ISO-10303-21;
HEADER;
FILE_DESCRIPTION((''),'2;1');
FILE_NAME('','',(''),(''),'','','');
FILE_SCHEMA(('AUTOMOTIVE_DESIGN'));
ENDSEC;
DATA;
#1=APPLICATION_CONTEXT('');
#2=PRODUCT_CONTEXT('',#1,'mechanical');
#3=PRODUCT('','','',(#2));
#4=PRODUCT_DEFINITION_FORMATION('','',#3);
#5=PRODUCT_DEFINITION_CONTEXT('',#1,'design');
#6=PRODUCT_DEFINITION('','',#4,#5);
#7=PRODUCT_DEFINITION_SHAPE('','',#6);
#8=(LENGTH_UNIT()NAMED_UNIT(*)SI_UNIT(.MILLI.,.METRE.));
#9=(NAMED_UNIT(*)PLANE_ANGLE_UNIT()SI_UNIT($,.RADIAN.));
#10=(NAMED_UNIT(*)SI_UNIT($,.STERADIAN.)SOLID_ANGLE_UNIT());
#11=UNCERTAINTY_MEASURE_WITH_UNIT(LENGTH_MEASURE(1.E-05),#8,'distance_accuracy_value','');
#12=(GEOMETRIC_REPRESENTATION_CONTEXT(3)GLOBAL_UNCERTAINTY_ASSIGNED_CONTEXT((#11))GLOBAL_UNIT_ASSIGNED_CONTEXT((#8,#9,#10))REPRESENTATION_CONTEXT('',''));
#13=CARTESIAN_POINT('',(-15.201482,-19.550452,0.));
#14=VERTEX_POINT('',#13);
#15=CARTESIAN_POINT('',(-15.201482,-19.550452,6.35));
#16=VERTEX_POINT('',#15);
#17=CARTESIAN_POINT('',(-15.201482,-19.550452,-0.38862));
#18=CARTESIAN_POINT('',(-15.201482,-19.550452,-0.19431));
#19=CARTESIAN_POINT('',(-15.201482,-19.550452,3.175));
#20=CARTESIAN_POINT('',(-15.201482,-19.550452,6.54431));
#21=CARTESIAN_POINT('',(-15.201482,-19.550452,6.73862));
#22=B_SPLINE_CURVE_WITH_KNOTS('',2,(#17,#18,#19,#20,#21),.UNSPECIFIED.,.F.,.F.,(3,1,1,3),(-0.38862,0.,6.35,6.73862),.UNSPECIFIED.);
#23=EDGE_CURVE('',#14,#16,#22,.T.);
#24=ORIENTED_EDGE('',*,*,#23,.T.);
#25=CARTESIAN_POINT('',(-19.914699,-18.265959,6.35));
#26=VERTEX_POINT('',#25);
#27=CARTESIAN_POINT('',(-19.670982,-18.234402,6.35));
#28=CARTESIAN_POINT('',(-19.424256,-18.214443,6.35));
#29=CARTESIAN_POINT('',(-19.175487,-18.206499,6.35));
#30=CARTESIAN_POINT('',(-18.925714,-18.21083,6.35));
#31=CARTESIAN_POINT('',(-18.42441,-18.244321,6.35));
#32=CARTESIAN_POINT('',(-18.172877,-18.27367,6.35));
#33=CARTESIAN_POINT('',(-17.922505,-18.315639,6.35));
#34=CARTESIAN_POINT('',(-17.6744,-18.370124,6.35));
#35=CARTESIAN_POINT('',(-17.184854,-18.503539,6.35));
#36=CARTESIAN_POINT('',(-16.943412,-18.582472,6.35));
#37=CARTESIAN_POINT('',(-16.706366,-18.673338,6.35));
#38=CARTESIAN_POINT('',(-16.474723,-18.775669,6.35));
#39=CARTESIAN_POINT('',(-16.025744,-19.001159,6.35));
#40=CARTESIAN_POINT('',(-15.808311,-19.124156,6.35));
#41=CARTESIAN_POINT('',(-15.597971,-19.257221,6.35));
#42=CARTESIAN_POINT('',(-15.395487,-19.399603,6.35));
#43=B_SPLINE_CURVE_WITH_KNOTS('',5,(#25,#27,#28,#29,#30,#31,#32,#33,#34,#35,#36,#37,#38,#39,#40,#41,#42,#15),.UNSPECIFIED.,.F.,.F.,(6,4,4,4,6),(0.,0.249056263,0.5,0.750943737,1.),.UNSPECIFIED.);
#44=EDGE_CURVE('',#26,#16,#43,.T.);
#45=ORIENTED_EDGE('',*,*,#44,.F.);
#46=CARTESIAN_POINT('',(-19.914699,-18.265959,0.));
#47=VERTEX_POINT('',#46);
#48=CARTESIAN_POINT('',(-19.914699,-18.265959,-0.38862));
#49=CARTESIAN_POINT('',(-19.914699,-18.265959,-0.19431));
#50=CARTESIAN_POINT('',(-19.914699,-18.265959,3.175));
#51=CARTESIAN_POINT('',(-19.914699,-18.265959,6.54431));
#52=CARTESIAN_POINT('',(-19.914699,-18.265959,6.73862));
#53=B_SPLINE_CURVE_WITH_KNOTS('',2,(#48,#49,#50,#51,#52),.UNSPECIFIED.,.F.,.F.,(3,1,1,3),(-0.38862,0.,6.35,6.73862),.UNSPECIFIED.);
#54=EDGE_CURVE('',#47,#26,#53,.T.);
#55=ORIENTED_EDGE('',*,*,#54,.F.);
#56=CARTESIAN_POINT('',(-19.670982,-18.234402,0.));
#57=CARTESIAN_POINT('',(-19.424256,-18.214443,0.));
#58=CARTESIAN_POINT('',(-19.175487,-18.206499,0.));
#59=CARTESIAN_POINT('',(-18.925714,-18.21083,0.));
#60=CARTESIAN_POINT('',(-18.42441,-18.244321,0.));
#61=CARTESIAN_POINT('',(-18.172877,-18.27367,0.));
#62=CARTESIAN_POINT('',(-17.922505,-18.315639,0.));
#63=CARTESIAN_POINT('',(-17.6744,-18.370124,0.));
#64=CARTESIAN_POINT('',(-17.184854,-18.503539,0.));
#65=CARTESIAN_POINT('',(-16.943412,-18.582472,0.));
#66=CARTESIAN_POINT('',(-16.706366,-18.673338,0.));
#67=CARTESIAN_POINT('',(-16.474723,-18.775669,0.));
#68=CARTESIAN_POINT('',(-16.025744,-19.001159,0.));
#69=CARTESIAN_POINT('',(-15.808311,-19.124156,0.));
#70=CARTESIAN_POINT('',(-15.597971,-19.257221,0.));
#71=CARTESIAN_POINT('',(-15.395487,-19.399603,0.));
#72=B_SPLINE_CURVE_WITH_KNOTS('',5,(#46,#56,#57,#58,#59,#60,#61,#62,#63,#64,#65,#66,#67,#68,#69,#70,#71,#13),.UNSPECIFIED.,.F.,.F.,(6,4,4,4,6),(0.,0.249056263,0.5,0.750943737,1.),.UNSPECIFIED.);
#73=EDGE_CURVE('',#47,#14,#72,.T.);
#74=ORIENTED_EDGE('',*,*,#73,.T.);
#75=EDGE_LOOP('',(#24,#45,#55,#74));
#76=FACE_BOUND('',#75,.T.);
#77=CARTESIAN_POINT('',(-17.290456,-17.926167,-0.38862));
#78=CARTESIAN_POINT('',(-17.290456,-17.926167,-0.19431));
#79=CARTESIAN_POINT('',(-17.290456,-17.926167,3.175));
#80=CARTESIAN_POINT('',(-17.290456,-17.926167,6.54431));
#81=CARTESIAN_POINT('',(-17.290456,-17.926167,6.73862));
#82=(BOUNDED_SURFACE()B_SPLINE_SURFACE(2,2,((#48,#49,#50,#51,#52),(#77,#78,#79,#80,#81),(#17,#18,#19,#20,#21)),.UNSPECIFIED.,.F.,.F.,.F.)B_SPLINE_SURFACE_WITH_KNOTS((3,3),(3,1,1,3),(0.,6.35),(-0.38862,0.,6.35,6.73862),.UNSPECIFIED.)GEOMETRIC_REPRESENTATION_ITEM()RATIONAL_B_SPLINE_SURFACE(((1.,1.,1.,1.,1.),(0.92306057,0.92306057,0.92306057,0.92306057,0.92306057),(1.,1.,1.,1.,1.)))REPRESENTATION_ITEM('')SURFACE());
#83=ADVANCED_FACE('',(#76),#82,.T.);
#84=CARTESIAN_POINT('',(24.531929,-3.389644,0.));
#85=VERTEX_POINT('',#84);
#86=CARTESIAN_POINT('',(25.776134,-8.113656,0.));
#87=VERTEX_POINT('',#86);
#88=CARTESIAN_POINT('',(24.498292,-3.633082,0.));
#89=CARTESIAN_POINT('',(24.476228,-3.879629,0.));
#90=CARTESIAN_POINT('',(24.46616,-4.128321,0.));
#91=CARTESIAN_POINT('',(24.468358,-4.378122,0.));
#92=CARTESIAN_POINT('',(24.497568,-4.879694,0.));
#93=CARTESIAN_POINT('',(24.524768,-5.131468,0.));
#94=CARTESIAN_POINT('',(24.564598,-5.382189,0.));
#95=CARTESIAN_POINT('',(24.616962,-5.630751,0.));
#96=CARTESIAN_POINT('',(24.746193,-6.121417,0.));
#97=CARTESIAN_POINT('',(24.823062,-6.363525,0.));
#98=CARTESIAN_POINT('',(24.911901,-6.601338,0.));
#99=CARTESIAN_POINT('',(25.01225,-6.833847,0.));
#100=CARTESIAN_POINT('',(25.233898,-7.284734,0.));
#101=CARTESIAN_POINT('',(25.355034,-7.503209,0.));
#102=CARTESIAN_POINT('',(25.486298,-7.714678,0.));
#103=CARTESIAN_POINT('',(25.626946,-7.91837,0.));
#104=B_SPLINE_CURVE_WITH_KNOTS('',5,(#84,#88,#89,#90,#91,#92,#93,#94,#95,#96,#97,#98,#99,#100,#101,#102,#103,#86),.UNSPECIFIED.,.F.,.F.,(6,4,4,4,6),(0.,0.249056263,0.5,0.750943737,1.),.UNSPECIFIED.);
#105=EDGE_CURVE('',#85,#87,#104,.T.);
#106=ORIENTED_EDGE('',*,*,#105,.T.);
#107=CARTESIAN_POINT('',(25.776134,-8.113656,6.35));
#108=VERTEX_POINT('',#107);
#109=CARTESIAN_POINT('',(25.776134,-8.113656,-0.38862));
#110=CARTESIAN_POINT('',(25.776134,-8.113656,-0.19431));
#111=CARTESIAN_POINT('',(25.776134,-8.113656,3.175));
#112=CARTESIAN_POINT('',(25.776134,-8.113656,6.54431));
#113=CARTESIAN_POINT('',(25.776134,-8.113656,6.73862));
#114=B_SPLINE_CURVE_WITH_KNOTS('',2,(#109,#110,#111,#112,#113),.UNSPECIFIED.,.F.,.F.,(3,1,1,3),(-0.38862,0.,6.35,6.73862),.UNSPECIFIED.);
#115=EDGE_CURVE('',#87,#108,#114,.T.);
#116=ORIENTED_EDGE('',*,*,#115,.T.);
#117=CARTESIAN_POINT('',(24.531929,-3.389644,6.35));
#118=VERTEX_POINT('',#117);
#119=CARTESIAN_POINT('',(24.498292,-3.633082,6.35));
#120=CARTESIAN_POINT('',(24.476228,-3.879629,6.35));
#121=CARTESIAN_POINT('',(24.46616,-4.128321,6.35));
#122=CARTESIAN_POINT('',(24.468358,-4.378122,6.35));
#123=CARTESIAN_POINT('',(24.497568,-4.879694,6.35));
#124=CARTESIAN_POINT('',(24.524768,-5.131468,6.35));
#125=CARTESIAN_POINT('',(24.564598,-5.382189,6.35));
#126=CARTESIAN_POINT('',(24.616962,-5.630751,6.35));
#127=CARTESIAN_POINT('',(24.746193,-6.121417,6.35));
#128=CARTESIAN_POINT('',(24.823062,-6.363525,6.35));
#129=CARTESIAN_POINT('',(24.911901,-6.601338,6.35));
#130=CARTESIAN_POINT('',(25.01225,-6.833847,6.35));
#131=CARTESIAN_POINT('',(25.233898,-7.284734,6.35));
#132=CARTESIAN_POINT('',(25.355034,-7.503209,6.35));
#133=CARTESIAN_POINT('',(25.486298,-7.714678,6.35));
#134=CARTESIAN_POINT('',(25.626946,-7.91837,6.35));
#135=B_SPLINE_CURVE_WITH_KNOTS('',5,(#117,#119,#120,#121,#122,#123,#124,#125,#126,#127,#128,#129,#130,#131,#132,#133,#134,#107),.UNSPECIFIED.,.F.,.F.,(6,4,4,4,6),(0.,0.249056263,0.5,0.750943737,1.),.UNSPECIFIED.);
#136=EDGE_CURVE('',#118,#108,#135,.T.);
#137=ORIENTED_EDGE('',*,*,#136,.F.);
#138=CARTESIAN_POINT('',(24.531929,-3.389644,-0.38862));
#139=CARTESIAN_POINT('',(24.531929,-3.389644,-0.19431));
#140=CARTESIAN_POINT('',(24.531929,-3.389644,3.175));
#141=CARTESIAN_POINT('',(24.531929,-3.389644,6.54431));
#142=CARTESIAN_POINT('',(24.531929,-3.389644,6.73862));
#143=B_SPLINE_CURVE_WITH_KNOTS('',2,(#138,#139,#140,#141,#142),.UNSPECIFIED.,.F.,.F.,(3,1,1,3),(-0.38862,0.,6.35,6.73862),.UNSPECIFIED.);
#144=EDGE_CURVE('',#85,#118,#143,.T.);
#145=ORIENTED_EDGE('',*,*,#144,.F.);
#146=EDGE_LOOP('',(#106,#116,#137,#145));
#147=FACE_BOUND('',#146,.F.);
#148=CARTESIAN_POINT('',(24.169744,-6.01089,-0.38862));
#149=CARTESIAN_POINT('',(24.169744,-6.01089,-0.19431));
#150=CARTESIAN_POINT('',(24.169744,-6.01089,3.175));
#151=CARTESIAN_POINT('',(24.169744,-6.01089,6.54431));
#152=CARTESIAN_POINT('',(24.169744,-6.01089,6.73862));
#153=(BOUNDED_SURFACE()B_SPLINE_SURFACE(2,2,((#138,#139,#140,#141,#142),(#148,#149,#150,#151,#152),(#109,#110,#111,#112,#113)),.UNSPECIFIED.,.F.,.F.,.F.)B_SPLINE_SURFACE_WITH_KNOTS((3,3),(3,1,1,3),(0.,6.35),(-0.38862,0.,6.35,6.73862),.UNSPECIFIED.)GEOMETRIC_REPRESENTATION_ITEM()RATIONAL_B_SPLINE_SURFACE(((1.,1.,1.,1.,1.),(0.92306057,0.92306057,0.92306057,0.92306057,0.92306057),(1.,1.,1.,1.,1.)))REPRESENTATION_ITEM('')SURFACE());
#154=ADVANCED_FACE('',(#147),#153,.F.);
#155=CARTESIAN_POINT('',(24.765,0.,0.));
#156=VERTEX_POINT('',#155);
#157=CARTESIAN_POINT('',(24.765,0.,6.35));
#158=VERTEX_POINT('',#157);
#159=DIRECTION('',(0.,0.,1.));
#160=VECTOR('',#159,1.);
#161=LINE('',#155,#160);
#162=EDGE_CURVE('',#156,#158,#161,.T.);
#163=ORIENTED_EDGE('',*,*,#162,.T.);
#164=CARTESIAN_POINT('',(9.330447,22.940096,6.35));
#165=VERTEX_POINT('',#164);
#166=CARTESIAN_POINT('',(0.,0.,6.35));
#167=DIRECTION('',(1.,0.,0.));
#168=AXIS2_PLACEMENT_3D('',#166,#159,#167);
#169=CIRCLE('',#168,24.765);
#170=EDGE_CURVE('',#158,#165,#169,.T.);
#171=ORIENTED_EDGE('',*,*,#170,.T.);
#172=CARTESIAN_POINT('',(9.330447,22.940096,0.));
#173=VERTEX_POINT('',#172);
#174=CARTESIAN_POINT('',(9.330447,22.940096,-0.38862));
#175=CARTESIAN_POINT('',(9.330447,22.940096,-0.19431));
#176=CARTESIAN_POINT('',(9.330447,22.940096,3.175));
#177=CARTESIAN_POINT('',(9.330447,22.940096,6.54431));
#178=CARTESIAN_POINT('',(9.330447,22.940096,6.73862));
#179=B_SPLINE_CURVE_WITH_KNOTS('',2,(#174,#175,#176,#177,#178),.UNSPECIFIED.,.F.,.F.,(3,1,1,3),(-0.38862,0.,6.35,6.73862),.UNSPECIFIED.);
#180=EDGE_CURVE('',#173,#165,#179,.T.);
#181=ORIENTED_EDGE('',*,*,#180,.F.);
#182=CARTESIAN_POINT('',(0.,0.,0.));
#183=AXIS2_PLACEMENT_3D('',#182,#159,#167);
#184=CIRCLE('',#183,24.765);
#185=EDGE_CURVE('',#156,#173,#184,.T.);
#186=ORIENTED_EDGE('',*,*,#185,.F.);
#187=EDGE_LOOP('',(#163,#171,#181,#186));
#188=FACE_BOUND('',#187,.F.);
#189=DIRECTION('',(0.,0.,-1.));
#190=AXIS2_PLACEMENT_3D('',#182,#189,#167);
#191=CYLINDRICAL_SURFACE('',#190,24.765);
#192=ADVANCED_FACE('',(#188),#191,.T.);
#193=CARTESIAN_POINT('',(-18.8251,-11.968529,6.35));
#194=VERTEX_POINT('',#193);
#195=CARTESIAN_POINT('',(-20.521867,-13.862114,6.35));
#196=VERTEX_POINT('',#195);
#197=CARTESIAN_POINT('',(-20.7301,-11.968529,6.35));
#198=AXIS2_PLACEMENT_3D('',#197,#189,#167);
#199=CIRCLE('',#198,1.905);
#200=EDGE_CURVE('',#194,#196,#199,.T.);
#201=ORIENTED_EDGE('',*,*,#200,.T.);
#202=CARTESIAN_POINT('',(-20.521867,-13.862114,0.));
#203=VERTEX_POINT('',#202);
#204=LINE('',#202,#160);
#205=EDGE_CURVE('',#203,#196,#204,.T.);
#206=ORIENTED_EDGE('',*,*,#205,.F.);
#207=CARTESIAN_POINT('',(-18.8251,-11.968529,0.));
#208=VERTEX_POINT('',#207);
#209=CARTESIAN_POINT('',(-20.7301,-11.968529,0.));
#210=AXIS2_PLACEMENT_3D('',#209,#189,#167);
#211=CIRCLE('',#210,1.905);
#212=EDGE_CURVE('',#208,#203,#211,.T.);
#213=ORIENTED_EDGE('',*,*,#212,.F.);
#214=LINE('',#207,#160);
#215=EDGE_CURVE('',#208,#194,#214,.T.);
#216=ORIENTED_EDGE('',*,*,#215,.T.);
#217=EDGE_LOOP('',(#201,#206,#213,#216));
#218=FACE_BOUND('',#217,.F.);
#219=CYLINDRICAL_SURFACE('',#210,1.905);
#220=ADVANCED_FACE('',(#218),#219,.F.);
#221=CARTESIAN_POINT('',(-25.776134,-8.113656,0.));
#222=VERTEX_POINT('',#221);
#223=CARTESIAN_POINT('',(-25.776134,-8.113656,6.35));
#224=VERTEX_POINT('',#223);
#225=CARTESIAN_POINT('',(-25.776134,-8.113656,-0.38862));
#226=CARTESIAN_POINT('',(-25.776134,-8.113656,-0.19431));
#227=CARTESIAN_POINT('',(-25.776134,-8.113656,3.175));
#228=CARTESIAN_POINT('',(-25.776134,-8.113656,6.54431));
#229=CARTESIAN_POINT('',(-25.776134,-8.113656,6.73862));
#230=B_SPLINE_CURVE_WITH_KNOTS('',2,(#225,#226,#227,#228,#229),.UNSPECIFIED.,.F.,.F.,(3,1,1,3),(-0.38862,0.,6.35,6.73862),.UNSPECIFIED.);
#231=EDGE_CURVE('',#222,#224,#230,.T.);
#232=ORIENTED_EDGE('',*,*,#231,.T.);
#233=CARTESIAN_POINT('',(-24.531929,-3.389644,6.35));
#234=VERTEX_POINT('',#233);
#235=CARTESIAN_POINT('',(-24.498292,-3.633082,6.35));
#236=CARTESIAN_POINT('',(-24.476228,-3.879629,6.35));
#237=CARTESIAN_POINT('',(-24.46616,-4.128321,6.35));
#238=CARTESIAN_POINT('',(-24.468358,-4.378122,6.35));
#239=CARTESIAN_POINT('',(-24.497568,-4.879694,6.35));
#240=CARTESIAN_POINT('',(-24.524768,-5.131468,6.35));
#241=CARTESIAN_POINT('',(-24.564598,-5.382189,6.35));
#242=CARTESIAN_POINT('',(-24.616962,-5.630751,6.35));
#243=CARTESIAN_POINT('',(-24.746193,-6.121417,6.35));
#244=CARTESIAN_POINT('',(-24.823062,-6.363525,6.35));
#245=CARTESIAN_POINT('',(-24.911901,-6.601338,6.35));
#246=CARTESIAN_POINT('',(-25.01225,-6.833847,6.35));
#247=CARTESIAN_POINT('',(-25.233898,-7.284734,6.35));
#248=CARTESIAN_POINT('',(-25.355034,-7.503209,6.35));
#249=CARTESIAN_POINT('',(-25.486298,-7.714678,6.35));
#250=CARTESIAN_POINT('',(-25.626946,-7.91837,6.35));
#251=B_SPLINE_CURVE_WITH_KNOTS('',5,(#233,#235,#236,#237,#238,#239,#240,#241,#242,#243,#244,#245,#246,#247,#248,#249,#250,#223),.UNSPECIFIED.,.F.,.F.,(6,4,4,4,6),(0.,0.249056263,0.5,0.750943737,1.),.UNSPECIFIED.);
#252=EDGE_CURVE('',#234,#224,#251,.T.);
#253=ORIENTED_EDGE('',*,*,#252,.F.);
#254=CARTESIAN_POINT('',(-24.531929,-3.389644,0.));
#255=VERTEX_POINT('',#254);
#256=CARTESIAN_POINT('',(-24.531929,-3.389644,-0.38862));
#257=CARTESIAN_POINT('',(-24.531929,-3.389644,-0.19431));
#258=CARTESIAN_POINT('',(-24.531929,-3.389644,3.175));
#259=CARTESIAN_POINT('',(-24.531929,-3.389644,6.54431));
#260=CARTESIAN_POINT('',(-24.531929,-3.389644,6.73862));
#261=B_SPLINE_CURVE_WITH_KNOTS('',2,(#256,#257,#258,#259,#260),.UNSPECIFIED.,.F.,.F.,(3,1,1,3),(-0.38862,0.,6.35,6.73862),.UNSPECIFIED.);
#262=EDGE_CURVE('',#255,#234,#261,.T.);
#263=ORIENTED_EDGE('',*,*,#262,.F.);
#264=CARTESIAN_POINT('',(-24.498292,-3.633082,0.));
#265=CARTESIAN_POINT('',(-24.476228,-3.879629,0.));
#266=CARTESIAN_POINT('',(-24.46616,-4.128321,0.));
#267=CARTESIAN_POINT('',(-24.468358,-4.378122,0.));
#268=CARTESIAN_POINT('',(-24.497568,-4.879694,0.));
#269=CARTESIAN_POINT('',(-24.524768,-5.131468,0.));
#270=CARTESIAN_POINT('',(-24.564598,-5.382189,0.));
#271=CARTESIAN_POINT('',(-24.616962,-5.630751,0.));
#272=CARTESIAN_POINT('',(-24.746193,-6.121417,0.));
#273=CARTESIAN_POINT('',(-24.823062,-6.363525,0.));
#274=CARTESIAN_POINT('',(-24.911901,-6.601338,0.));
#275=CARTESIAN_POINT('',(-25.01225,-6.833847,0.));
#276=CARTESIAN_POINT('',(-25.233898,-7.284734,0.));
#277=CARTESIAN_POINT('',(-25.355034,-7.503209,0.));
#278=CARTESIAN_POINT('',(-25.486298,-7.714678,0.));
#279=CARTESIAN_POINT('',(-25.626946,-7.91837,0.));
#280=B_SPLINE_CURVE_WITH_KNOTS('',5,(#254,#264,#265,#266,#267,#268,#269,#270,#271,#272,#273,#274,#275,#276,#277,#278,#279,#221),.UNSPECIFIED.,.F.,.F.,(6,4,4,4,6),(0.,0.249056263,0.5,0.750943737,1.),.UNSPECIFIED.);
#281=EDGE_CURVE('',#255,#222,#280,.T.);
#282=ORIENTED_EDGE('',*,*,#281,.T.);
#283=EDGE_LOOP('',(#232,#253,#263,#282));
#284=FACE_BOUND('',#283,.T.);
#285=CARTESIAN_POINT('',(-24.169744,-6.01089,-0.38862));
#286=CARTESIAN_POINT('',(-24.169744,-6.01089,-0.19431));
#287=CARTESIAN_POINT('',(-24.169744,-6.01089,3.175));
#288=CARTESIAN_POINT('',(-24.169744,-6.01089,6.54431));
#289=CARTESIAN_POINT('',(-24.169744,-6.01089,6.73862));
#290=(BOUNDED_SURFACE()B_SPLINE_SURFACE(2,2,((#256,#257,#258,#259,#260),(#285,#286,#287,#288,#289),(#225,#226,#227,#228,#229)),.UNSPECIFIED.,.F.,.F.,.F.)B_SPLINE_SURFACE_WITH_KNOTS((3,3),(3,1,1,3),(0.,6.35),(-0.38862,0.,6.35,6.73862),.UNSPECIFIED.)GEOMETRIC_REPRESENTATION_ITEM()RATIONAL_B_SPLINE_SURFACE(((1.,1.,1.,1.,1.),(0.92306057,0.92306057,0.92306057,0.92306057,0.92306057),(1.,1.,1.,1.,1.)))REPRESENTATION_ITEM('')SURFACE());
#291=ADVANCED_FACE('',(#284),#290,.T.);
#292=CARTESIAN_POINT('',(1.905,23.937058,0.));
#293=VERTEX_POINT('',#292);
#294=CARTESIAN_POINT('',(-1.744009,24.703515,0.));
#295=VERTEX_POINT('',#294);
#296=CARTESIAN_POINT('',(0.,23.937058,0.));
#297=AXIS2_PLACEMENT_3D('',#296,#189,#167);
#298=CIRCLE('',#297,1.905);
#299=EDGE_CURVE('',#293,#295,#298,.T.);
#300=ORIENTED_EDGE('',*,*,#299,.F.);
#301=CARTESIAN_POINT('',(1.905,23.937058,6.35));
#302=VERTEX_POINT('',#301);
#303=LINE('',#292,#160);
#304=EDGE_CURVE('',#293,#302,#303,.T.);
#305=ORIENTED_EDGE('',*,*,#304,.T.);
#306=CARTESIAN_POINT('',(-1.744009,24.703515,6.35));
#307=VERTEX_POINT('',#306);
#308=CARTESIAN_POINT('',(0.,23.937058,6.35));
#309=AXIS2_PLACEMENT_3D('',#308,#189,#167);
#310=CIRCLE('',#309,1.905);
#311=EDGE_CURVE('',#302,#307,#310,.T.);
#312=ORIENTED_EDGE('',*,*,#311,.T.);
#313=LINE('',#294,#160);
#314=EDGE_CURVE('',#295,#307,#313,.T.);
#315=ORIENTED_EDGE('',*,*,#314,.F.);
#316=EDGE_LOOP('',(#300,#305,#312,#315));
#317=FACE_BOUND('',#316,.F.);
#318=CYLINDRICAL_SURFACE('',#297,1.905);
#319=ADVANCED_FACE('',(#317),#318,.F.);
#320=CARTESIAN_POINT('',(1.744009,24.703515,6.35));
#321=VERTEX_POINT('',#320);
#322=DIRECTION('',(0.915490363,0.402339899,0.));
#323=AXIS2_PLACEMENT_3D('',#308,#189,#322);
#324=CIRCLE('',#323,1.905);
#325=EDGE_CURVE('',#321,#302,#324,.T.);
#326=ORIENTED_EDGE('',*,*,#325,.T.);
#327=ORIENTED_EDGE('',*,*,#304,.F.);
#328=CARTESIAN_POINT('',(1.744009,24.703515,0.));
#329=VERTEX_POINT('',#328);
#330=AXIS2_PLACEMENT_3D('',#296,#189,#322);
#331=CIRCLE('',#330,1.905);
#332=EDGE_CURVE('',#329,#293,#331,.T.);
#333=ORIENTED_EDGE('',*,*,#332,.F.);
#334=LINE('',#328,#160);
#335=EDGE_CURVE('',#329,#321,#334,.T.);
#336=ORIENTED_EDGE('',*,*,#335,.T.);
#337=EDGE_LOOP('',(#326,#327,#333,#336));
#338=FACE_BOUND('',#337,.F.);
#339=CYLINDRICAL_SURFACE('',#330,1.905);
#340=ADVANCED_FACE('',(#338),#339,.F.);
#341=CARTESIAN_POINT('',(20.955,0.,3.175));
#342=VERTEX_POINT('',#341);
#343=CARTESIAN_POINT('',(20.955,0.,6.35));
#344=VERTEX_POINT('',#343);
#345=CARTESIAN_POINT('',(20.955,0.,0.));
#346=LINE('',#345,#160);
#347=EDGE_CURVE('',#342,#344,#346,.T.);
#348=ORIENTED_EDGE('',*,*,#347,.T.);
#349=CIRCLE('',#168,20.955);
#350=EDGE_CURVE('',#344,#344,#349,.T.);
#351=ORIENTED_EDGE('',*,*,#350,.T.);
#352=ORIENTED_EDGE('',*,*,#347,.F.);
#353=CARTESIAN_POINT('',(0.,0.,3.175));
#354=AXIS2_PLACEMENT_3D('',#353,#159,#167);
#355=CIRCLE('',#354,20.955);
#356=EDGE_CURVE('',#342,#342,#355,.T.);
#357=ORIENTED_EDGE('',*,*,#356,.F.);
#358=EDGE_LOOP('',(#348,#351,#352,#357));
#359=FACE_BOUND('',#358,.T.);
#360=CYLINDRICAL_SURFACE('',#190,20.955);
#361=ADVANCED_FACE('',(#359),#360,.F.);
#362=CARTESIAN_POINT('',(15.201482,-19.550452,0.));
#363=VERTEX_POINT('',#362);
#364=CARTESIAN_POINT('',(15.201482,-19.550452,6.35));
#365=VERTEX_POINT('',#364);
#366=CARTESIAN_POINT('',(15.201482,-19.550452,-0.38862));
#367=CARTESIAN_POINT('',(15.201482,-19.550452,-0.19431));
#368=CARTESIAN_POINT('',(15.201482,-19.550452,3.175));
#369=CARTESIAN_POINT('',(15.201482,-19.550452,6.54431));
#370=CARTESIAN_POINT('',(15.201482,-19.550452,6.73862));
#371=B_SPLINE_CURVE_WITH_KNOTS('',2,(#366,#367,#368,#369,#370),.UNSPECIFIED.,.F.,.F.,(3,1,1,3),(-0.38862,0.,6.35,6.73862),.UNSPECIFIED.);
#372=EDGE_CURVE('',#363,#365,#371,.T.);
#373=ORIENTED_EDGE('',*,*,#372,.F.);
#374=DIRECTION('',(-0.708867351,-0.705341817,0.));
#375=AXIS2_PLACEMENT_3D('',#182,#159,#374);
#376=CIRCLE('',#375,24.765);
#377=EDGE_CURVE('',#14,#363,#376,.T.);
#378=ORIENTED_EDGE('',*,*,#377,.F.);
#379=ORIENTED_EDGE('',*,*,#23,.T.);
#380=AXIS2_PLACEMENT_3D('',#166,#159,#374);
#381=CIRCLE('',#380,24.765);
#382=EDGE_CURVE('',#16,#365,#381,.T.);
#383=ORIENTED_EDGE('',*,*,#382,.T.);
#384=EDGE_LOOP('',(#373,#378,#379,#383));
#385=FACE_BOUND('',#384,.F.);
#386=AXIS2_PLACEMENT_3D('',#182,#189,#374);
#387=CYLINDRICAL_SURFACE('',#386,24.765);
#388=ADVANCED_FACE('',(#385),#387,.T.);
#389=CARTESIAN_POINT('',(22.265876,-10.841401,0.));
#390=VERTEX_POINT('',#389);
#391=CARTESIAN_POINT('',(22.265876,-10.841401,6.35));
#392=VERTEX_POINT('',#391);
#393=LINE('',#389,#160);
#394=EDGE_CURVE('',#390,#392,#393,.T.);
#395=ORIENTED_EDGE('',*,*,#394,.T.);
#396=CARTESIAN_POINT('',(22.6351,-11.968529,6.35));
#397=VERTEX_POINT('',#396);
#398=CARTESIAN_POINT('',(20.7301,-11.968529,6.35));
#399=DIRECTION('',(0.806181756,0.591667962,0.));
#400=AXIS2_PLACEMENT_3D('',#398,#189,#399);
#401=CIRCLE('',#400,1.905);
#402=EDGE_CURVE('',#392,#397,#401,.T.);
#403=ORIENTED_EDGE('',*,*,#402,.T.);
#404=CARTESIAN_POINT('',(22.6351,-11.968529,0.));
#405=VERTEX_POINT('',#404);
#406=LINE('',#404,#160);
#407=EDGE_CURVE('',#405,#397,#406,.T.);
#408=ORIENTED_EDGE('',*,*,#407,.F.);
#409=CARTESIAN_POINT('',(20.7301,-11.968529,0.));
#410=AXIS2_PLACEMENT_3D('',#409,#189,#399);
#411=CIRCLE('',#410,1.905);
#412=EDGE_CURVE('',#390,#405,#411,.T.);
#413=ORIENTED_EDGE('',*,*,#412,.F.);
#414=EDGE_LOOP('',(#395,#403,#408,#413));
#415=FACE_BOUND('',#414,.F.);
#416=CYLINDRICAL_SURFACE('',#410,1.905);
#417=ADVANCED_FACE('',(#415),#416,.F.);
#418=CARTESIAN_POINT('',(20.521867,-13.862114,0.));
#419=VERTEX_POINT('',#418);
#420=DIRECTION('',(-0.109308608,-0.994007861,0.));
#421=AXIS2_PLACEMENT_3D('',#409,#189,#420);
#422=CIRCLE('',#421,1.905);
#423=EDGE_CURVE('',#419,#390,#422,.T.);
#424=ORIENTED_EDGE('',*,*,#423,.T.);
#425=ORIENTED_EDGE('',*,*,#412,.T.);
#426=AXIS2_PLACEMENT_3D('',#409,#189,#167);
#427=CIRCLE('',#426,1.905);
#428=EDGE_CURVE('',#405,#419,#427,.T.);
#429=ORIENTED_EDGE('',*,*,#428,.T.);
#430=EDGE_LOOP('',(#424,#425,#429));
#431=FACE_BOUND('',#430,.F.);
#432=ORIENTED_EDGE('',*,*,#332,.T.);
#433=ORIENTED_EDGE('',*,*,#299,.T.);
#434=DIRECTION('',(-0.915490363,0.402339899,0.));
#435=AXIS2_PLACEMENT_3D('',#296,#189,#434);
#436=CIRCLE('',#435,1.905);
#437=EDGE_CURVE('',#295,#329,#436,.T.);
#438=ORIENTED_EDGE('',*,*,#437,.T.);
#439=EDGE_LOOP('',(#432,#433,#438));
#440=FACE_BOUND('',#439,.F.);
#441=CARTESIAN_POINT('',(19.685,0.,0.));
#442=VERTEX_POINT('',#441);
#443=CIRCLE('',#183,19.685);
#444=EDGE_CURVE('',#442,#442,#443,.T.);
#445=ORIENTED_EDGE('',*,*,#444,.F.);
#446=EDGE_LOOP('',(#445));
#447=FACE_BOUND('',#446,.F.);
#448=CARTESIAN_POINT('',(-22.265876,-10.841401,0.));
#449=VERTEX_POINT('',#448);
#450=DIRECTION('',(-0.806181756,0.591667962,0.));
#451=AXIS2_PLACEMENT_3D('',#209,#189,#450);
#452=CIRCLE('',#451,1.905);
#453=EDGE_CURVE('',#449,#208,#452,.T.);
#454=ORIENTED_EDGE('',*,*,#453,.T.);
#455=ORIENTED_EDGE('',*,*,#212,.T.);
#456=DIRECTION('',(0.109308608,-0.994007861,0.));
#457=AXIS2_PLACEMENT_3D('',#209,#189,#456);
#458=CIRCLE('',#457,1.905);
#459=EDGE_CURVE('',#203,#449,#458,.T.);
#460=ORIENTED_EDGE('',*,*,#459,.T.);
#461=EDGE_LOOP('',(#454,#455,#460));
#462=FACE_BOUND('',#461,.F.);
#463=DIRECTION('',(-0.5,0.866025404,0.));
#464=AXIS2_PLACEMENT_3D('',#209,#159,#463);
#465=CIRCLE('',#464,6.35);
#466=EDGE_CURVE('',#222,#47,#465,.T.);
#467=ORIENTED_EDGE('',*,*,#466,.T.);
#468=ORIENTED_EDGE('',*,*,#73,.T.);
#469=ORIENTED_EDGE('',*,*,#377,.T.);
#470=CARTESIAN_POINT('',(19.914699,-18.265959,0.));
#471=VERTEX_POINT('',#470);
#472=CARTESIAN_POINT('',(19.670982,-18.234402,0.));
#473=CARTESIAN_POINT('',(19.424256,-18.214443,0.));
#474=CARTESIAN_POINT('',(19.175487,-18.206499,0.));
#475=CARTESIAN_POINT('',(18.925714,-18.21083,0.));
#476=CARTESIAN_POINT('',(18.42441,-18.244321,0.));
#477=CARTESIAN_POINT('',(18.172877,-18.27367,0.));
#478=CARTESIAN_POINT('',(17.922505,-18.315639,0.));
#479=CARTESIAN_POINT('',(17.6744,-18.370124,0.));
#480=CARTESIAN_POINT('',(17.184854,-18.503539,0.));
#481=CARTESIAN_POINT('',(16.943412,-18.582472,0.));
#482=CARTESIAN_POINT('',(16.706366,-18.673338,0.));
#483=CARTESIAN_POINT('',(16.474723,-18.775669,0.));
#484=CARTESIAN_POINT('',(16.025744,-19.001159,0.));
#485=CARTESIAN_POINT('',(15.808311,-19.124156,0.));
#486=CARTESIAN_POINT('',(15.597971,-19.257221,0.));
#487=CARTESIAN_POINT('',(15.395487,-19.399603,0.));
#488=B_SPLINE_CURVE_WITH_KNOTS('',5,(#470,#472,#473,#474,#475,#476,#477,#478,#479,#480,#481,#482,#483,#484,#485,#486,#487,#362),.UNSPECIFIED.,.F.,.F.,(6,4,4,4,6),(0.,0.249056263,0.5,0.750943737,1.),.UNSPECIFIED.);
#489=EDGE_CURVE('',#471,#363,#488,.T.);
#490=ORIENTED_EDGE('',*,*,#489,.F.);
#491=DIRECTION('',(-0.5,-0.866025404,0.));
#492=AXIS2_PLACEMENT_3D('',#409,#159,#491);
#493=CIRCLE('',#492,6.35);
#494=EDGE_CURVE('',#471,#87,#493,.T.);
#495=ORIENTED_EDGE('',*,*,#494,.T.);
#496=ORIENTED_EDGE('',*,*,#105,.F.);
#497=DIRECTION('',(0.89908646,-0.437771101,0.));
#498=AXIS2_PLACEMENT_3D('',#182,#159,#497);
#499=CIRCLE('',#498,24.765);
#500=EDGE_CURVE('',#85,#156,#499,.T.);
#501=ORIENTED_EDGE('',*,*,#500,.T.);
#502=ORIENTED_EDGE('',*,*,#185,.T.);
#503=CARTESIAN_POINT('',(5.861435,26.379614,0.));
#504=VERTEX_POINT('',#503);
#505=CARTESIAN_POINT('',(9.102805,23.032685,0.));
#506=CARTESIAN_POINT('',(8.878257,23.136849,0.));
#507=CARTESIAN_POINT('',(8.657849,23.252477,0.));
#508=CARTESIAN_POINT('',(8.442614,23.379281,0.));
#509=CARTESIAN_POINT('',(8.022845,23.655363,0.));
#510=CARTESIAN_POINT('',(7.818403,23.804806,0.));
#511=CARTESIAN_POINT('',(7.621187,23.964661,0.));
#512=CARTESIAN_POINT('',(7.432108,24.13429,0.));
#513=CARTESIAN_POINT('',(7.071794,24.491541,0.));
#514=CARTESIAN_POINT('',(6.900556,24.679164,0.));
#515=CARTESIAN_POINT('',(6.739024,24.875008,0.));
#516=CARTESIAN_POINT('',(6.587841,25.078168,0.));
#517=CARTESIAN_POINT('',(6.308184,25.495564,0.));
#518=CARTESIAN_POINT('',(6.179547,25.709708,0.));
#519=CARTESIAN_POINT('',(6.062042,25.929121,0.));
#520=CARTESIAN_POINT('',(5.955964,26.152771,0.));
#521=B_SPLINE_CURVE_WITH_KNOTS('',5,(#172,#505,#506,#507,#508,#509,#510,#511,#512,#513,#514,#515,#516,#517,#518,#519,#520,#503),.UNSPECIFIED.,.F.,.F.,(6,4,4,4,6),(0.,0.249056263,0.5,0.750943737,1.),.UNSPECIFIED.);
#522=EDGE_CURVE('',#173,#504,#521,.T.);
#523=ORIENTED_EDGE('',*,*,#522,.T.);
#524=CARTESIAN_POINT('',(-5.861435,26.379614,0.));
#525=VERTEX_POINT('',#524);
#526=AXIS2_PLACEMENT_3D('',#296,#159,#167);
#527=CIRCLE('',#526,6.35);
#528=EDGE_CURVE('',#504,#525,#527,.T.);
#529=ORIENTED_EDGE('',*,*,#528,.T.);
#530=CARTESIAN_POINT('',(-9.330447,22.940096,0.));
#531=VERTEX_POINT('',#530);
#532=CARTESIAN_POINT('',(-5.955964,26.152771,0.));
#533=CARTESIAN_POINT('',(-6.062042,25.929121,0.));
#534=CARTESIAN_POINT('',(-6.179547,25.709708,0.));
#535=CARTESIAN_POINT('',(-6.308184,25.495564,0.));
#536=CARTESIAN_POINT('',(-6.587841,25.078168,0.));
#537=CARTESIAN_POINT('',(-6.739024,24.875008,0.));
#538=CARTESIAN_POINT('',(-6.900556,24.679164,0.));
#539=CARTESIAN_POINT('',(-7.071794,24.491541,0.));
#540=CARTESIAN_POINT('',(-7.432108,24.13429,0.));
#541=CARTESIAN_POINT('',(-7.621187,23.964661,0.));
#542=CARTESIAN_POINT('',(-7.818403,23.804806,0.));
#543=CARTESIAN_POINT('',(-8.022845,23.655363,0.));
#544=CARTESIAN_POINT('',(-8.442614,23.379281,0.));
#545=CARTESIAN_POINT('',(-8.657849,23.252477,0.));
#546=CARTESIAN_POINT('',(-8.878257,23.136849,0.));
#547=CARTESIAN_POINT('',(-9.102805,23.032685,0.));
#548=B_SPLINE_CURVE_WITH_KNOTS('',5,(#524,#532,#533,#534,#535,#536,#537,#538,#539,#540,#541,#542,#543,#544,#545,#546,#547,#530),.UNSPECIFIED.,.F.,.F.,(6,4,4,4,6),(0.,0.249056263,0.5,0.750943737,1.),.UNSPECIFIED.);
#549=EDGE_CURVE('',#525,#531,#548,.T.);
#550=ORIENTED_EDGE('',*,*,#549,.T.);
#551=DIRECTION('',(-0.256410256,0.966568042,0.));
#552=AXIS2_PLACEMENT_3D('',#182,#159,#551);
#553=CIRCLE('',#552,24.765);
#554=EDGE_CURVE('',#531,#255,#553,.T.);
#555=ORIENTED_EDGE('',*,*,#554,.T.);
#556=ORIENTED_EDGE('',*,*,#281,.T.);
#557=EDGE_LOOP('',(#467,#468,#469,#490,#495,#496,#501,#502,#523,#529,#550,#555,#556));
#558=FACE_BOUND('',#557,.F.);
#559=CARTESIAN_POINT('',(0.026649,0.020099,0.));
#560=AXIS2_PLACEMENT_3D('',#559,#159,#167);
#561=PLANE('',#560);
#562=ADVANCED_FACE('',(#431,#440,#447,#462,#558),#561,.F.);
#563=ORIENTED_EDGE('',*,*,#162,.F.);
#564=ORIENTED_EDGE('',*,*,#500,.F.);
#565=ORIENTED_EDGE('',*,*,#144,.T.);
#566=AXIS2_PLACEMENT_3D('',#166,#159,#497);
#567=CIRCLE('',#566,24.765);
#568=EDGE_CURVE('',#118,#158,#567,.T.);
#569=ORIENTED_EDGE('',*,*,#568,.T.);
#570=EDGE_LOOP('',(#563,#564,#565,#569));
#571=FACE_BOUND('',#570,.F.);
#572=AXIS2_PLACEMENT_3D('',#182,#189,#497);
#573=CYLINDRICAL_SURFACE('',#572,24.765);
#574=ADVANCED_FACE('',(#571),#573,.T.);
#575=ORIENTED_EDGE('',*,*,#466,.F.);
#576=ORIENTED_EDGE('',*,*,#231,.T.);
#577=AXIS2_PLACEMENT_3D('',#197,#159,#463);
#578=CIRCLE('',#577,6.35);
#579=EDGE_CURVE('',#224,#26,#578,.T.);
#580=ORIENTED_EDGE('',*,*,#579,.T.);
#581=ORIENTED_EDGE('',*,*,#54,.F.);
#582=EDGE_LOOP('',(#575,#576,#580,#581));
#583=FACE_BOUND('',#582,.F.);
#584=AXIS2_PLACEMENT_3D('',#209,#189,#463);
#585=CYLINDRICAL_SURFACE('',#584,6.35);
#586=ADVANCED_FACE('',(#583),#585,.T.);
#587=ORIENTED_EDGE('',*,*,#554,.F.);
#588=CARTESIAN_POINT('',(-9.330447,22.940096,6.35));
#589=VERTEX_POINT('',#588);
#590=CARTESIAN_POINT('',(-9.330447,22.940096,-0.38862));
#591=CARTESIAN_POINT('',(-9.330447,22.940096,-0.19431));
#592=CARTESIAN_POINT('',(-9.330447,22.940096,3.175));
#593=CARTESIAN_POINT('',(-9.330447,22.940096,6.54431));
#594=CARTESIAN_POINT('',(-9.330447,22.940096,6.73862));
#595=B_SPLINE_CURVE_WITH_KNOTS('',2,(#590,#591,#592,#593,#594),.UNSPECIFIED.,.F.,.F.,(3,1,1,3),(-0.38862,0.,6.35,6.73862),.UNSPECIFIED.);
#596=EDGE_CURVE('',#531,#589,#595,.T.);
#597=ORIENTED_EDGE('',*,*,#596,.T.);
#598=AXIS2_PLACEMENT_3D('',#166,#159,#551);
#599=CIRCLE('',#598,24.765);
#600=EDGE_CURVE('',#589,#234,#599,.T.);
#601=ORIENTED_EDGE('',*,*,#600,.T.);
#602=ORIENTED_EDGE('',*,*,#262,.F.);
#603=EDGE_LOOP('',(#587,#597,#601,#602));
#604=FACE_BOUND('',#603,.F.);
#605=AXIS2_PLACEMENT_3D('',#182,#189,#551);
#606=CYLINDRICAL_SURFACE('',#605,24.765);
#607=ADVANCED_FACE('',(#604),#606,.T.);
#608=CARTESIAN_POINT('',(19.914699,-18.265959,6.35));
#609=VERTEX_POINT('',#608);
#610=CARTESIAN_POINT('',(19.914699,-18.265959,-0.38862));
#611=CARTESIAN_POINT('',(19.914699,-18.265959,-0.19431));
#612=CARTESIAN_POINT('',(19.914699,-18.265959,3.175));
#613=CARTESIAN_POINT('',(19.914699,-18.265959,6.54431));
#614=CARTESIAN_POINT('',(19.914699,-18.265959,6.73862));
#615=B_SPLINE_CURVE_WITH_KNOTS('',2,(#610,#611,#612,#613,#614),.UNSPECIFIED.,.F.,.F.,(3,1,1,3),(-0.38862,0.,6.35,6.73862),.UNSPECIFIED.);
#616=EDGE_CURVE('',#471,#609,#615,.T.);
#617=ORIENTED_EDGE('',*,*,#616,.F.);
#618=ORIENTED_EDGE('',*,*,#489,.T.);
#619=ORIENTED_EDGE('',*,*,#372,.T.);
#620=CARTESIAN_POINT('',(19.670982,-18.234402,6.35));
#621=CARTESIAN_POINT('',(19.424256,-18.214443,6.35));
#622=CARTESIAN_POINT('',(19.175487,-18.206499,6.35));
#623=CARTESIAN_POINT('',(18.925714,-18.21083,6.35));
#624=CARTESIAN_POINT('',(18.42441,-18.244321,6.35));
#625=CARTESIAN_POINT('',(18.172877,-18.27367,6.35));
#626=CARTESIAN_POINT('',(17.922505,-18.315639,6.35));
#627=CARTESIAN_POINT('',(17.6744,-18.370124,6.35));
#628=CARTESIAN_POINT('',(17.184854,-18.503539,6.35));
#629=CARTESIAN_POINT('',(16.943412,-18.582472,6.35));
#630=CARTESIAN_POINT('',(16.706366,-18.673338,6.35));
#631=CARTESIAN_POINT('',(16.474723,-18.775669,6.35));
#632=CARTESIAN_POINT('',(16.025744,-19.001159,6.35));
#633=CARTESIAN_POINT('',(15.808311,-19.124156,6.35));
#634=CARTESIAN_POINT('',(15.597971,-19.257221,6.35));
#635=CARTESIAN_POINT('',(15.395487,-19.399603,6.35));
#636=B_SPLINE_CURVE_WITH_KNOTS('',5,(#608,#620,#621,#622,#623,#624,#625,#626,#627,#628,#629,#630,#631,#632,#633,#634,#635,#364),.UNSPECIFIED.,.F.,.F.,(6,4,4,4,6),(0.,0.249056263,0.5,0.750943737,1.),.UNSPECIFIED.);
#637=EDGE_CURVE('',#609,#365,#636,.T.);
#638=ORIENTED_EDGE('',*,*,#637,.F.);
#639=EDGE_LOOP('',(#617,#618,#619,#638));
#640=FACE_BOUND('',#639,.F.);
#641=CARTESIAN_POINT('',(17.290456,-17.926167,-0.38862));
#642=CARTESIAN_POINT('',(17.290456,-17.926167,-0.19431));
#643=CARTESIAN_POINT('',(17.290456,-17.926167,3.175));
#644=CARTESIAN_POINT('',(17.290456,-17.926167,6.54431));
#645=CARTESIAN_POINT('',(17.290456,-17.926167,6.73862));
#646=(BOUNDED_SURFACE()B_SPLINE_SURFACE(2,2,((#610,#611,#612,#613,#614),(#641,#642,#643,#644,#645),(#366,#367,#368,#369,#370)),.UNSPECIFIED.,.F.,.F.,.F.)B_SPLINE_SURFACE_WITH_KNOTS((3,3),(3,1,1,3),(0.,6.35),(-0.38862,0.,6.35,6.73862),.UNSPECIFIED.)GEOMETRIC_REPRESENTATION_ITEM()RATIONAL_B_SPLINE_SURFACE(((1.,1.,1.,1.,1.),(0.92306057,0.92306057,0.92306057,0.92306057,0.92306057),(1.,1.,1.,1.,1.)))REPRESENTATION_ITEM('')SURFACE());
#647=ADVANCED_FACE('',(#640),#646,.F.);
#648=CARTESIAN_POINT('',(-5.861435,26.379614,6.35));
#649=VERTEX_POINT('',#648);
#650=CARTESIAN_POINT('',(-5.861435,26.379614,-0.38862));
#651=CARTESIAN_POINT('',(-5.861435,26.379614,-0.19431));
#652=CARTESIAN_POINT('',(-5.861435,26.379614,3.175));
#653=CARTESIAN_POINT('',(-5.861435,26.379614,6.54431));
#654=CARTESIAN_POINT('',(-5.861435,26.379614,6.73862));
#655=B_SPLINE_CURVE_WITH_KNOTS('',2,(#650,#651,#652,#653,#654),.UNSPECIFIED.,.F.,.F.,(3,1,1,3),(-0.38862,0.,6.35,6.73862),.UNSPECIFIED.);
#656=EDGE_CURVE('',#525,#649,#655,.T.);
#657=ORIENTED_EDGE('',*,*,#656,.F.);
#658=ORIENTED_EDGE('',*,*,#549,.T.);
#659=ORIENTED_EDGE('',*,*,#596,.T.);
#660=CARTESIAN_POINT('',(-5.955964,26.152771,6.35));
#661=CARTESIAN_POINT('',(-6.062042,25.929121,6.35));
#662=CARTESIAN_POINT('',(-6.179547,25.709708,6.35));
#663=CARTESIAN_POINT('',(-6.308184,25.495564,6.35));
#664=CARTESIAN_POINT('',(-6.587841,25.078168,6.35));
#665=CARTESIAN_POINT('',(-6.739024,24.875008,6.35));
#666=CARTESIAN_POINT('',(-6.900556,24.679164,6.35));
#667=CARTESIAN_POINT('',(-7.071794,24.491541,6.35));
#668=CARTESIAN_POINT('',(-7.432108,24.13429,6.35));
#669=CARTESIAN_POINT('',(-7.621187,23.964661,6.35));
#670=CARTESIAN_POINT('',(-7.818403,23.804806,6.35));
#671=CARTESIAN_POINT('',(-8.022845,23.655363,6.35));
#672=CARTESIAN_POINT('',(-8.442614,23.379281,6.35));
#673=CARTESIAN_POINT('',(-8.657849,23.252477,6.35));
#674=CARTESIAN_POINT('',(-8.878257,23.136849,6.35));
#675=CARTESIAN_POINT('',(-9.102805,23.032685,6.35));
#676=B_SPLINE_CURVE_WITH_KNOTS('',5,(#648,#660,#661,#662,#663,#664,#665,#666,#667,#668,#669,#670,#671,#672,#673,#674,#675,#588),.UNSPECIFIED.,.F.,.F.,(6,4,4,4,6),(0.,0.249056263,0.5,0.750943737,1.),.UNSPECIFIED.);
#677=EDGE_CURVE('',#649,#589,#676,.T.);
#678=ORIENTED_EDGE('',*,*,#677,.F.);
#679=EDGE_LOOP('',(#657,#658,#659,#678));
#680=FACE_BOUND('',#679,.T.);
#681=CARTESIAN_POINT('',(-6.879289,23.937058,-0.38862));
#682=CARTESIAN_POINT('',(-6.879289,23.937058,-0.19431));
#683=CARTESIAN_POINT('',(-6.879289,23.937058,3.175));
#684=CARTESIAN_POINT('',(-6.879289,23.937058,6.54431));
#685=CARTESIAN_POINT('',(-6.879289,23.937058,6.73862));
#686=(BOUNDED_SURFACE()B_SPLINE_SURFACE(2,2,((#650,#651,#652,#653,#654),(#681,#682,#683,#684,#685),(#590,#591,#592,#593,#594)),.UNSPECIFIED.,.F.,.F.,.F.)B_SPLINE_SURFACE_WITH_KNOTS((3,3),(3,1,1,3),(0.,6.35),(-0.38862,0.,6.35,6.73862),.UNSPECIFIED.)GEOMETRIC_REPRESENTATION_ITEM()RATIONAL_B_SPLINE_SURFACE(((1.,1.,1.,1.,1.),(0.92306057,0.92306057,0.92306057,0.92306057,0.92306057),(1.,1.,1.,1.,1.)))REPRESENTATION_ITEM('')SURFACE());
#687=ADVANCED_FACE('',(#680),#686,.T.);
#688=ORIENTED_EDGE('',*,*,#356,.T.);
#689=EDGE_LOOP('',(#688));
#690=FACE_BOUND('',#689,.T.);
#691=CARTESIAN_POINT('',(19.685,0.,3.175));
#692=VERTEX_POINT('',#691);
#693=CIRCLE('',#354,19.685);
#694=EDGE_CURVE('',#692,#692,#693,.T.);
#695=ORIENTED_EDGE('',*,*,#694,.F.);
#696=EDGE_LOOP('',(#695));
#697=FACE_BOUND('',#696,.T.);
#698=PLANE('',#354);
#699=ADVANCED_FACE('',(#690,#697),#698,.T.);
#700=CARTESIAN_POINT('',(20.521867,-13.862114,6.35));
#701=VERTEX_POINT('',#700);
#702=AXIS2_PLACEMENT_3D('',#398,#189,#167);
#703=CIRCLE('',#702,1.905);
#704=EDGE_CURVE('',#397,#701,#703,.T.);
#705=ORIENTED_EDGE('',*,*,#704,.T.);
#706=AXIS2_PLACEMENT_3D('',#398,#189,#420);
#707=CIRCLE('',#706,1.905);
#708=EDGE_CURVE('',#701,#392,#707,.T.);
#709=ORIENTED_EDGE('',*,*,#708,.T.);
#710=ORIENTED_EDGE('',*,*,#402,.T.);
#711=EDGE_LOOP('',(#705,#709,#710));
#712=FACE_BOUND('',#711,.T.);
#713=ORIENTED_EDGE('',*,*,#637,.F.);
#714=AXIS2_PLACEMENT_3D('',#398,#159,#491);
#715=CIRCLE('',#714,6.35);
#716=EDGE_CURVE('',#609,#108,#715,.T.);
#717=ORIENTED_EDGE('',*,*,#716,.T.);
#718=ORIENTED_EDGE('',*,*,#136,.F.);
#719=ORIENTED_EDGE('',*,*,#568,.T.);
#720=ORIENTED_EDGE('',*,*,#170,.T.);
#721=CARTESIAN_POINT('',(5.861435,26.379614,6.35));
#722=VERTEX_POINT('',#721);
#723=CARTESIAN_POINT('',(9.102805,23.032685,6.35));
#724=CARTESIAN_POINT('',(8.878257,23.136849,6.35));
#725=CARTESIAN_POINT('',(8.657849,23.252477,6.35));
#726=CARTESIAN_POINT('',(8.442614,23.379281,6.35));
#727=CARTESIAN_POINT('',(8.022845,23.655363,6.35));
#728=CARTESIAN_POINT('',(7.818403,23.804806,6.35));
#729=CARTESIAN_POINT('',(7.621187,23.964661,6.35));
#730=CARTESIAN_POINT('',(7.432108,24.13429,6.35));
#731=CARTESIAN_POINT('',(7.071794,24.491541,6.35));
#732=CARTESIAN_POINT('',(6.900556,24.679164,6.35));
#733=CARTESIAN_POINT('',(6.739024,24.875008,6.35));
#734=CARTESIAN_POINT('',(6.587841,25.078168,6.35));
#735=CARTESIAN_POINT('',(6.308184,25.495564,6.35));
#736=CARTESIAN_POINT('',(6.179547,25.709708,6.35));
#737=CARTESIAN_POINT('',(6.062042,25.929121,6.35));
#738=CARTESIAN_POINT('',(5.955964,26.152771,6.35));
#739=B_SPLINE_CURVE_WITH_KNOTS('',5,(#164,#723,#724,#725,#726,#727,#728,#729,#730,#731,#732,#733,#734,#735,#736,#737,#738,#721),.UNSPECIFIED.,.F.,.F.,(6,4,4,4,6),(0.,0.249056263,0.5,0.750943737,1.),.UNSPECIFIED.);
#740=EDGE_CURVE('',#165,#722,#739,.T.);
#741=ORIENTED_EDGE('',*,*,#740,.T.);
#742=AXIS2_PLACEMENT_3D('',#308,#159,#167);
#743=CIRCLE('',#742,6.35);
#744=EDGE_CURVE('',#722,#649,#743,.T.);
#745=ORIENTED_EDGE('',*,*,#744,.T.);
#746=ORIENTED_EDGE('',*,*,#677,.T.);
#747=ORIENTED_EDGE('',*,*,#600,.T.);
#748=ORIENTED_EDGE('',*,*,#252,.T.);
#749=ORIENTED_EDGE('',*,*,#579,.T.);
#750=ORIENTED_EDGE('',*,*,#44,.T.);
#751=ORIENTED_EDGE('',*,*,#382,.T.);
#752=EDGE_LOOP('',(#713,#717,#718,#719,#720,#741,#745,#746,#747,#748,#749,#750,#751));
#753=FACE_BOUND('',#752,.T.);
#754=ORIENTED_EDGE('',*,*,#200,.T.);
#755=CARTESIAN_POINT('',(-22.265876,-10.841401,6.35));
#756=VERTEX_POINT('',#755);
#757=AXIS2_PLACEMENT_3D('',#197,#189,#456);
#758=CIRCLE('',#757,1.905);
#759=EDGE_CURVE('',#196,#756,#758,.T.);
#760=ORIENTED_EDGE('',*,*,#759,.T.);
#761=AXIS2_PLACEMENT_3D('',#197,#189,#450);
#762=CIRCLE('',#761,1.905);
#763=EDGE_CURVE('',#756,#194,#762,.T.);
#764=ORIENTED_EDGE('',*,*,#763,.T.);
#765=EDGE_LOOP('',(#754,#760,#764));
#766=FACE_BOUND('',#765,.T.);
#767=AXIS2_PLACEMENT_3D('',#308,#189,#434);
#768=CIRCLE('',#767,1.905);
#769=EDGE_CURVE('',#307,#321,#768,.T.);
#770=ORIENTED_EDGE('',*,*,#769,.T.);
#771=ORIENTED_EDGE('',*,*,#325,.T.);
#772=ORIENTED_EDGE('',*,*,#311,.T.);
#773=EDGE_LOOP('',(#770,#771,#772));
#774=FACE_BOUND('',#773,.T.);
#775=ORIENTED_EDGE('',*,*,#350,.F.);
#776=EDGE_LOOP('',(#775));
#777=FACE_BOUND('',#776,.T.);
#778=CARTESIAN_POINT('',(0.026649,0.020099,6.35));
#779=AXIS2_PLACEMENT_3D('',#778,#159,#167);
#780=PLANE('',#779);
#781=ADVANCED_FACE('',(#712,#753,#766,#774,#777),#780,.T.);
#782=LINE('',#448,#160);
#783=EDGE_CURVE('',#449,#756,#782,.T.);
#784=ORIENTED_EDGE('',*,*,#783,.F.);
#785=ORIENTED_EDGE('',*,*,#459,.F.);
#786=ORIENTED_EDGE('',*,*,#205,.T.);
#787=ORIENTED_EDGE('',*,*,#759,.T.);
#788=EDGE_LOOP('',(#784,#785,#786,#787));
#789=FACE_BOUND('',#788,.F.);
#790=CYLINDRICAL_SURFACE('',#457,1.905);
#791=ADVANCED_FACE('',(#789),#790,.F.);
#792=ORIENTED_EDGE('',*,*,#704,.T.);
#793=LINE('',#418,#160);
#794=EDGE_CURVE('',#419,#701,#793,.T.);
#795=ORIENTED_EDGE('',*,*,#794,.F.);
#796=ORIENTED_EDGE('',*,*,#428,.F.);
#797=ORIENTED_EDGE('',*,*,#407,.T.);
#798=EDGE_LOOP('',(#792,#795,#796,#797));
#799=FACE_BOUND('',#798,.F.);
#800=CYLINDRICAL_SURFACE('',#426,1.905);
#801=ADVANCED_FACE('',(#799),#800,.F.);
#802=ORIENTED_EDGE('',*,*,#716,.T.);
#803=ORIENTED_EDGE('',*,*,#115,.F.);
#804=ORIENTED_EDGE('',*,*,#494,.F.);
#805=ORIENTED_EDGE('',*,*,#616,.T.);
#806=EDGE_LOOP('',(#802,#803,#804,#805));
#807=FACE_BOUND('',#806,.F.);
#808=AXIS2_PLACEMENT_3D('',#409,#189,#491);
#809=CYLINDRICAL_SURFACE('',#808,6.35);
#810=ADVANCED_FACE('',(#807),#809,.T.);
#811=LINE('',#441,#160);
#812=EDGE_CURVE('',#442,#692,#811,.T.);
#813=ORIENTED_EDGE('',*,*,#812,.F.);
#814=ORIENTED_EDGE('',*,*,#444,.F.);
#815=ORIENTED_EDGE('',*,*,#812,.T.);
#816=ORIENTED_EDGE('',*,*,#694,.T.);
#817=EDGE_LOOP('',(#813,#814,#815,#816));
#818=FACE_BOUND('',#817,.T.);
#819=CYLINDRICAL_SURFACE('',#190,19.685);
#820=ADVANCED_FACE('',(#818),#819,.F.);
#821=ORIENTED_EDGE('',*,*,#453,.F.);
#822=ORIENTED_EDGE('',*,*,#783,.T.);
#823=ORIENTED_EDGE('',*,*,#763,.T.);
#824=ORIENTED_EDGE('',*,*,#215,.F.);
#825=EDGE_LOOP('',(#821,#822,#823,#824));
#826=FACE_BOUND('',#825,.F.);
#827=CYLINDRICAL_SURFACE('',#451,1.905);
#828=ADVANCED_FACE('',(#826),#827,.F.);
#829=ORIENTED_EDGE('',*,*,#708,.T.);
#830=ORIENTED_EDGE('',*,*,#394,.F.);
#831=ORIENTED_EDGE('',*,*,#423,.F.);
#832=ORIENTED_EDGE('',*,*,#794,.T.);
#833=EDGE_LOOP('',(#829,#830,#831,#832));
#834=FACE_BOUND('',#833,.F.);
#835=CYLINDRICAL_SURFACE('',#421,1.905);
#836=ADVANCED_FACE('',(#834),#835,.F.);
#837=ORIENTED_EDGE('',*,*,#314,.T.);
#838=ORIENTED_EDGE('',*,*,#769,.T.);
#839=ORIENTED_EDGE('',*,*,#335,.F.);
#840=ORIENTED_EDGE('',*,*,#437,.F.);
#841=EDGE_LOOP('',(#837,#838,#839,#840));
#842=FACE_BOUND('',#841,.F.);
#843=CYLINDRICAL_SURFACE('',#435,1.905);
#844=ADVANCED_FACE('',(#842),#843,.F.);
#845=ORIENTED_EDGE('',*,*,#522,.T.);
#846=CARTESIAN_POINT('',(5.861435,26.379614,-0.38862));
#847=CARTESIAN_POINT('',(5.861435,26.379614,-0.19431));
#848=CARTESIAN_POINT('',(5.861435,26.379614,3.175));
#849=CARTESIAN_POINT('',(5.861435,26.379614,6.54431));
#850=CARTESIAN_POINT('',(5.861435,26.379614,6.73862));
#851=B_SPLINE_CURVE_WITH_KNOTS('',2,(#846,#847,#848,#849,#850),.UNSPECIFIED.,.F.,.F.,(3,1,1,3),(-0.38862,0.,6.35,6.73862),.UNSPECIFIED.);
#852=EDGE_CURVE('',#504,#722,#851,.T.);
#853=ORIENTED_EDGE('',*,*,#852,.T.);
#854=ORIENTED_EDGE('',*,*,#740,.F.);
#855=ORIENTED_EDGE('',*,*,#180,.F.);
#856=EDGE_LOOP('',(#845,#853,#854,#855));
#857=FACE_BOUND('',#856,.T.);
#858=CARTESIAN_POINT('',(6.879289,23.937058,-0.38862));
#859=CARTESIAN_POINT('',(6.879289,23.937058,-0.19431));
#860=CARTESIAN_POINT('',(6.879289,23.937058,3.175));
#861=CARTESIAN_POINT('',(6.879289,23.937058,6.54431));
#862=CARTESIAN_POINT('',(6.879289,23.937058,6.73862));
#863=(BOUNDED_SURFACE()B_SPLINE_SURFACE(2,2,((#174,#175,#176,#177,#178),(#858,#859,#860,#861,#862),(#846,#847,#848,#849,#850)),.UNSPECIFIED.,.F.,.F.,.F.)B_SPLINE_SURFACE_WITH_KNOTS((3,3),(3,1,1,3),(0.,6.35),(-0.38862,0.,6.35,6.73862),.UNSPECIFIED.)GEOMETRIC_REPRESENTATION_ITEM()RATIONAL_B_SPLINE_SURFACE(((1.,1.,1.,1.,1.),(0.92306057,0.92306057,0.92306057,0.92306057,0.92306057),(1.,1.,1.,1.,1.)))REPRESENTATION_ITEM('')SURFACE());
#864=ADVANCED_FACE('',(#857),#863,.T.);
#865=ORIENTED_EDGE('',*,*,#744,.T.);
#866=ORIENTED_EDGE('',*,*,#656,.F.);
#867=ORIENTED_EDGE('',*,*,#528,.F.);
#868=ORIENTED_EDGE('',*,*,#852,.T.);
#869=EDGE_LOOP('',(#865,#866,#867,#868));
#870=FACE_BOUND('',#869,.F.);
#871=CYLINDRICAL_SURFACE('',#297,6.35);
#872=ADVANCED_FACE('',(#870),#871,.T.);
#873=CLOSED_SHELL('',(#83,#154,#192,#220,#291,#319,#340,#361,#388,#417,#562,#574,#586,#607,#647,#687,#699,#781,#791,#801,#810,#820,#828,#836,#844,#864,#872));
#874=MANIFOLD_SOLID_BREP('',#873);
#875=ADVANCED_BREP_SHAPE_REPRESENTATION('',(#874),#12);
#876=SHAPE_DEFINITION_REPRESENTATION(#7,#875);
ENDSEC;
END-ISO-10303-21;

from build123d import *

# Parameters (mm, degrees)
F0_R     = 20.955
F0_R_2   = 19.685
F1_DEPTH = 3.175
F2_DEPTH = 6.35
F3_R     = 6.35


with BuildPart() as f1:
    # F0 (on Top) → F1 (new body)
    with BuildSketch(Plane.XY):
        Circle(F0_R)
        Circle(F0_R_2, mode=Mode.SUBTRACT)
    extrude(amount=F1_DEPTH)

    # F0 (on Top) → F2 (join)
    with BuildSketch(Plane.XY):
        with BuildLine():
            ThreePointArc((23.9050999455, -6.4692674698), (24.5490837421, -3.2630832697), (24.765, 0))
            ThreePointArc((24.765, 0), (19.6285885254, 15.1004548773), (6.35, 23.9370575677))
            ThreePointArc((6.35, 23.9370575677), (4.0651088886, 24.4290833787), (1.7440091422, 24.703515076))
            ThreePointArc((1.7440091422, 24.703515076), (1.8643178935, 24.3286489263), (1.905, 23.9370575677))
            ThreePointArc((1.905, 23.9370575677), (-0.3915913586, 22.0727396742), (-1.7440091422, 24.703515076))
            ThreePointArc((-1.7440091422, 24.703515076), (-4.0651088886, 24.4290833787), (-6.35, 23.9370575677))
            ThreePointArc((-6.35, 23.9370575677), (-21.4471191247, 12.3825), (-23.9050999455, -6.4692674698))
            ThreePointArc((-23.9050999455, -6.4692674698), (-23.1887612414, -8.6940541227), (-22.2658761897, -10.8414013165))
            ThreePointArc((-22.2658761897, -10.8414013165), (-20.1370690632, -10.1581864481), (-18.8250999455, -11.9685287839))
            ThreePointArc((-18.8250999455, -11.9685287839), (-19.3113489683, -13.239815795), (-20.5218670475, -13.8621137596))
            ThreePointArc((-20.5218670475, -13.8621137596), (-19.1236523528, -15.735029256), (-17.5550999455, -17.4677900979))
            ThreePointArc((-17.5550999455, -17.4677900979), (0, -24.765), (17.5550999455, -17.4677900979))
            ThreePointArc((17.5550999455, -17.4677900979), (19.1236523528, -15.735029256), (20.5218670475, -13.8621137596))
            ThreePointArc((20.5218670475, -13.8621137596), (19.0803215513, -11.0160287839), (22.2658761897, -10.8414013165))
            ThreePointArc((22.2658761897, -10.8414013165), (23.1887612414, -8.6940541227), (23.9050999455, -6.4692674698))
        make_face()
        Circle(F0_R, mode=Mode.SUBTRACT)
        with BuildLine():
            ThreePointArc((1.7440091422, 24.703515076), (4.0651088886, 24.4290833787), (6.35, 23.9370575677))
            ThreePointArc((6.35, 23.9370575677), (0, 30.2870575677), (-6.35, 23.9370575677))
            ThreePointArc((-6.35, 23.9370575677), (-4.0651088886, 24.4290833787), (-1.7440091422, 24.703515076))
            ThreePointArc((-1.7440091422, 24.703515076), (0, 25.8420575677), (1.7440091422, 24.703515076))
        make_face()
        with BuildLine():
            ThreePointArc((17.5550999455, -17.4677900979), (26.2293612595, -15.1435287839), (23.9050999455, -6.4692674698))
            ThreePointArc((23.9050999455, -6.4692674698), (23.1887612414, -8.6940541227), (22.2658761897, -10.8414013165))
            ThreePointArc((22.2658761897, -10.8414013165), (22.5404422812, -11.3754979015), (22.6350999455, -11.9685287839))
            ThreePointArc((22.6350999455, -11.9685287839), (22.0013869566, -13.3872797611), (20.5218670475, -13.8621137596))
            ThreePointArc((20.5218670475, -13.8621137596), (19.1236523528, -15.735029256), (17.5550999455, -17.4677900979))
        make_face()
        with BuildLine():
            ThreePointArc((-22.2658761897, -10.8414013165), (-23.1887612414, -8.6940541227), (-23.9050999455, -6.4692674698))
            ThreePointArc((-23.9050999455, -6.4692674698), (-26.2293612595, -15.1435287839), (-17.5550999455, -17.4677900979))
            ThreePointArc((-17.5550999455, -17.4677900979), (-19.1236523528, -15.735029256), (-20.5218670475, -13.8621137596))
            ThreePointArc((-20.5218670475, -13.8621137596), (-22.3798783397, -12.9210287839), (-22.2658761897, -10.8414013165))
        make_face()
    extrude(amount=F2_DEPTH)

    # F3
    f3_edges = [f1.edges().sort_by_distance(p)[0] for p in [
        (6.35, 23.937058, 3.175),
        (-23.9051, -6.469267, 3.175),
        (17.5551, -17.46779, 3.175),
        (23.9051, -6.469267, 3.175),
        (-6.35, 23.937058, 3.175),
        (-17.5551, -17.46779, 3.175),
    ]]
    fillet(f3_edges, radius=F3_R)


solid = f1.part
